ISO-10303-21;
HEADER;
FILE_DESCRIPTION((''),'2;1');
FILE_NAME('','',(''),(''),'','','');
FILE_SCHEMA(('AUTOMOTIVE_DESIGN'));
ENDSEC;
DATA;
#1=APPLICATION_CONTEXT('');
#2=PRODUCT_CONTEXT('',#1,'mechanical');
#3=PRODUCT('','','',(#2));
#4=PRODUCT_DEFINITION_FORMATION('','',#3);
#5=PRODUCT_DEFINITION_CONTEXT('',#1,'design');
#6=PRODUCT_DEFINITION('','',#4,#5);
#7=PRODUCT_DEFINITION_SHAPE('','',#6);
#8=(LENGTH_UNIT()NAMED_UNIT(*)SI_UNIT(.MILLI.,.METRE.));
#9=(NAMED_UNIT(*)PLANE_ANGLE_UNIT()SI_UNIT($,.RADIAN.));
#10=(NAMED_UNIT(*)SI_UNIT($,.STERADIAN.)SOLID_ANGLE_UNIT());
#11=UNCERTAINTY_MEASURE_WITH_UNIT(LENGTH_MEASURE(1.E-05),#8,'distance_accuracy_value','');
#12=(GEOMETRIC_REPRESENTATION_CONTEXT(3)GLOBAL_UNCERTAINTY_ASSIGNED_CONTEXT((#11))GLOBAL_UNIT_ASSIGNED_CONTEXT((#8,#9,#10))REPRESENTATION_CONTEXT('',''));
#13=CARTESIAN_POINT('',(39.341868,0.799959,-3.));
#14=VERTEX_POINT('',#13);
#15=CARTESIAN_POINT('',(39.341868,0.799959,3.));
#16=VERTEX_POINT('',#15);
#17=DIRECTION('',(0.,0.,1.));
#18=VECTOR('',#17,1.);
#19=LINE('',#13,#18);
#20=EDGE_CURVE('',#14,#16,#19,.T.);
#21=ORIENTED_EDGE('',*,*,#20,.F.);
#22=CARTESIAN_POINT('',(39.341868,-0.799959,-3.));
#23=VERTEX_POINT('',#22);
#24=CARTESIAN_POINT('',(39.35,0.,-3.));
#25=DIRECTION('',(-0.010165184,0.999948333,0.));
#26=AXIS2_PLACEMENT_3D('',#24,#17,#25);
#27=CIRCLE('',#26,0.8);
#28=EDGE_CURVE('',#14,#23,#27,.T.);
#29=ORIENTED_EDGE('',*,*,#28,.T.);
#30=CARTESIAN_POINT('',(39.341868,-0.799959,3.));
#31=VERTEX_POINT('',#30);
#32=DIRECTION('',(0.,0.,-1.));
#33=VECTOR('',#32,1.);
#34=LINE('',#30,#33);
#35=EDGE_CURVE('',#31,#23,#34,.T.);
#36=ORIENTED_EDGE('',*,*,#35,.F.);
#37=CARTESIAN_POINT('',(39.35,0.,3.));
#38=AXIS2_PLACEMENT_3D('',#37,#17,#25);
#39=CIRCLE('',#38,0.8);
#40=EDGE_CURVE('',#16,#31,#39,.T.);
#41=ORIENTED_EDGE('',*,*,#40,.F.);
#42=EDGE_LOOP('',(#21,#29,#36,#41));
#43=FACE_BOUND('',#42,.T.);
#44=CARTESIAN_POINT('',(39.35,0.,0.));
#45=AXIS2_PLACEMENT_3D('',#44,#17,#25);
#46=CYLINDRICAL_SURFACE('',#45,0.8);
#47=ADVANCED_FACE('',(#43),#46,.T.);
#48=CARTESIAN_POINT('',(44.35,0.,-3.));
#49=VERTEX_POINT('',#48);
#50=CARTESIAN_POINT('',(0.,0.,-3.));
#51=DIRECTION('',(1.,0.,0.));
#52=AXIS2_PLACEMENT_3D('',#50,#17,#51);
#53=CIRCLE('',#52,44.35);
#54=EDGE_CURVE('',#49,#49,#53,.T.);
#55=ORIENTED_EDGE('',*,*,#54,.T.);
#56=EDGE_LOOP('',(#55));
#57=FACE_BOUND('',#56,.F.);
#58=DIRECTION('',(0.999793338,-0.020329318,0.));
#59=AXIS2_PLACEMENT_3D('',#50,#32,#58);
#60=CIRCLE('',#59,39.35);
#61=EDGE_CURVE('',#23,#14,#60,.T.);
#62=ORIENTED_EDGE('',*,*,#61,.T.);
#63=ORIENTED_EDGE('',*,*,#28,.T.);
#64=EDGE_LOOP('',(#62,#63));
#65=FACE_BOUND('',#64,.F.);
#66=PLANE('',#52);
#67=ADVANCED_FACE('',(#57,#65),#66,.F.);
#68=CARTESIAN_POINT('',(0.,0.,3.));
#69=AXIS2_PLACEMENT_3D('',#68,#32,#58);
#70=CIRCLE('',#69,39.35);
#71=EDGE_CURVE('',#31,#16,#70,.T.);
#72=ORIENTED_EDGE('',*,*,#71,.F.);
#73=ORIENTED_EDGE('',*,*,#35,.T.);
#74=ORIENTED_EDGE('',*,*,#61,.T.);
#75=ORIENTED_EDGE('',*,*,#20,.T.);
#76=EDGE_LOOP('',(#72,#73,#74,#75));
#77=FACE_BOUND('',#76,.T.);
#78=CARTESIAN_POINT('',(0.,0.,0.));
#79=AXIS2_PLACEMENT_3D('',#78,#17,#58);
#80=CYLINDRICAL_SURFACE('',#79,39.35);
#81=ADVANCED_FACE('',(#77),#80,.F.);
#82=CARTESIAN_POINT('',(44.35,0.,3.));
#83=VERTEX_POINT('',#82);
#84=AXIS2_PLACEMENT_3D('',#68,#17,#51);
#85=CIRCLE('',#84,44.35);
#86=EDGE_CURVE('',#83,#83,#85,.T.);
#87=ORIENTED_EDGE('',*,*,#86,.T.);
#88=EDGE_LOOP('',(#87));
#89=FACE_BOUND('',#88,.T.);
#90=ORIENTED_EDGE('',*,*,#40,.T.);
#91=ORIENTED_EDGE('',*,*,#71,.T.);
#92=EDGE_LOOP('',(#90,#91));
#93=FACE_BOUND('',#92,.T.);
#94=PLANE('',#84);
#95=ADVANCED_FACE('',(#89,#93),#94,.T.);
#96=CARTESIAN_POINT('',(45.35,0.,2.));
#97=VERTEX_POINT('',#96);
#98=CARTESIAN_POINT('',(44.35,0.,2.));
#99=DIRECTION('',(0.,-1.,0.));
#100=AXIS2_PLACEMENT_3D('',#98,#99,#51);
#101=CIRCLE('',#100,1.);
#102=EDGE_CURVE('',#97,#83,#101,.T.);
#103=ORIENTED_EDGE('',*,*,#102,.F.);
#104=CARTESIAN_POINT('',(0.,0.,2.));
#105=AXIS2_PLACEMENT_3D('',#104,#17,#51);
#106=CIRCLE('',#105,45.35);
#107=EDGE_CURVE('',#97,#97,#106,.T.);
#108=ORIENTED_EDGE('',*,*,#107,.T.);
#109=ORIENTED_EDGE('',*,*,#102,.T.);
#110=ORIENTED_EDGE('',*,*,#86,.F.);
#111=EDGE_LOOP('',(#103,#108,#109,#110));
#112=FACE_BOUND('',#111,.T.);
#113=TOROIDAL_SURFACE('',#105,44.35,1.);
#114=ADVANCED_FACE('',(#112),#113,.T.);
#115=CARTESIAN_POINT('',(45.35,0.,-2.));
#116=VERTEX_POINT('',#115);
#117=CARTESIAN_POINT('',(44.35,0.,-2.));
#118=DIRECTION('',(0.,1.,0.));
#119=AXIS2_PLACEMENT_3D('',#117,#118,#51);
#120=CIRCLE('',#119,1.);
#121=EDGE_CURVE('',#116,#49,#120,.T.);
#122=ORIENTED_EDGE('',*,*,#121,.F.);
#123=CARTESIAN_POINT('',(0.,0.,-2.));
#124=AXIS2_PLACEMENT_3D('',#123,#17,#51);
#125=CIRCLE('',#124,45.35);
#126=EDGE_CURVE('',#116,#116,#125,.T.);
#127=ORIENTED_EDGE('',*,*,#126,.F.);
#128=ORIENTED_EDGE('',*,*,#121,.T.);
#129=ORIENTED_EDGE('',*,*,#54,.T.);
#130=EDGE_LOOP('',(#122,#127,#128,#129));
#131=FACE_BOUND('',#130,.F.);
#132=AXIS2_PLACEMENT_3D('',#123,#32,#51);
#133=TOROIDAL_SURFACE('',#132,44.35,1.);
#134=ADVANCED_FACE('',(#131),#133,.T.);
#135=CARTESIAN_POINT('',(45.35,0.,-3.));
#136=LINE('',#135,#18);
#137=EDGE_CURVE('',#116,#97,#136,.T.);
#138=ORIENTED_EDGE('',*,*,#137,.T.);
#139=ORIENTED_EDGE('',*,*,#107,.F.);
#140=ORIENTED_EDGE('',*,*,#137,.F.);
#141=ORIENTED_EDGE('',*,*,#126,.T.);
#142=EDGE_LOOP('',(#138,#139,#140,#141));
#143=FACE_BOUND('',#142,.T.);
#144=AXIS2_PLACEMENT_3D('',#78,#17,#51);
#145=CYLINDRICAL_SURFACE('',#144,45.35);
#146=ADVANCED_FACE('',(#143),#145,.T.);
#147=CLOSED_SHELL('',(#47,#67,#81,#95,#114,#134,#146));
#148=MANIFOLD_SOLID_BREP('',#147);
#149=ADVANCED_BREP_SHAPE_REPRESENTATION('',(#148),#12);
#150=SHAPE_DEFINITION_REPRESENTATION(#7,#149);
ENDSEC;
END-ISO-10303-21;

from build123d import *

# Parameters (mm, degrees)
F1_R     = 45.35
F2_DEPTH = 3
F4_R     = 1


with BuildPart() as f2:
    # F1 (on Top) → F2 (new body, symmetric)
    with BuildSketch(Plane.XY):
        Circle(F1_R)
        with BuildLine():
            ThreePointArc((39.3418678526, 0.7999586665), (39.3479669106, 0.4), (39.35, 0))
            ThreePointArc((39.35, 0), (39.3479669106, -0.4), (39.3418678526, -0.7999586665))
            ThreePointArc((39.3418678526, -0.7999586665), (-39.35, 0), (39.3418678526, 0.7999586665))
        make_face(mode=Mode.SUBTRACT)
        with BuildLine():
            ThreePointArc((39.3418678526, -0.7999586665), (39.3479669106, -0.4), (39.35, 0))
            ThreePointArc((39.35, 0), (39.3479669106, 0.4), (39.3418678526, 0.7999586665))
            ThreePointArc((39.3418678526, 0.7999586665), (38.55, 0), (39.3418678526, -0.7999586665))
        make_face()
    extrude(amount=F2_DEPTH, both=True)

    # F4
    f4_edges = [f2.edges().sort_by_distance(p)[0] for p in [
        (-45.35, 0, 3),
        (-45.35, 0, -3),
    ]]
    fillet(f4_edges, radius=F4_R)


solid = f2.part
